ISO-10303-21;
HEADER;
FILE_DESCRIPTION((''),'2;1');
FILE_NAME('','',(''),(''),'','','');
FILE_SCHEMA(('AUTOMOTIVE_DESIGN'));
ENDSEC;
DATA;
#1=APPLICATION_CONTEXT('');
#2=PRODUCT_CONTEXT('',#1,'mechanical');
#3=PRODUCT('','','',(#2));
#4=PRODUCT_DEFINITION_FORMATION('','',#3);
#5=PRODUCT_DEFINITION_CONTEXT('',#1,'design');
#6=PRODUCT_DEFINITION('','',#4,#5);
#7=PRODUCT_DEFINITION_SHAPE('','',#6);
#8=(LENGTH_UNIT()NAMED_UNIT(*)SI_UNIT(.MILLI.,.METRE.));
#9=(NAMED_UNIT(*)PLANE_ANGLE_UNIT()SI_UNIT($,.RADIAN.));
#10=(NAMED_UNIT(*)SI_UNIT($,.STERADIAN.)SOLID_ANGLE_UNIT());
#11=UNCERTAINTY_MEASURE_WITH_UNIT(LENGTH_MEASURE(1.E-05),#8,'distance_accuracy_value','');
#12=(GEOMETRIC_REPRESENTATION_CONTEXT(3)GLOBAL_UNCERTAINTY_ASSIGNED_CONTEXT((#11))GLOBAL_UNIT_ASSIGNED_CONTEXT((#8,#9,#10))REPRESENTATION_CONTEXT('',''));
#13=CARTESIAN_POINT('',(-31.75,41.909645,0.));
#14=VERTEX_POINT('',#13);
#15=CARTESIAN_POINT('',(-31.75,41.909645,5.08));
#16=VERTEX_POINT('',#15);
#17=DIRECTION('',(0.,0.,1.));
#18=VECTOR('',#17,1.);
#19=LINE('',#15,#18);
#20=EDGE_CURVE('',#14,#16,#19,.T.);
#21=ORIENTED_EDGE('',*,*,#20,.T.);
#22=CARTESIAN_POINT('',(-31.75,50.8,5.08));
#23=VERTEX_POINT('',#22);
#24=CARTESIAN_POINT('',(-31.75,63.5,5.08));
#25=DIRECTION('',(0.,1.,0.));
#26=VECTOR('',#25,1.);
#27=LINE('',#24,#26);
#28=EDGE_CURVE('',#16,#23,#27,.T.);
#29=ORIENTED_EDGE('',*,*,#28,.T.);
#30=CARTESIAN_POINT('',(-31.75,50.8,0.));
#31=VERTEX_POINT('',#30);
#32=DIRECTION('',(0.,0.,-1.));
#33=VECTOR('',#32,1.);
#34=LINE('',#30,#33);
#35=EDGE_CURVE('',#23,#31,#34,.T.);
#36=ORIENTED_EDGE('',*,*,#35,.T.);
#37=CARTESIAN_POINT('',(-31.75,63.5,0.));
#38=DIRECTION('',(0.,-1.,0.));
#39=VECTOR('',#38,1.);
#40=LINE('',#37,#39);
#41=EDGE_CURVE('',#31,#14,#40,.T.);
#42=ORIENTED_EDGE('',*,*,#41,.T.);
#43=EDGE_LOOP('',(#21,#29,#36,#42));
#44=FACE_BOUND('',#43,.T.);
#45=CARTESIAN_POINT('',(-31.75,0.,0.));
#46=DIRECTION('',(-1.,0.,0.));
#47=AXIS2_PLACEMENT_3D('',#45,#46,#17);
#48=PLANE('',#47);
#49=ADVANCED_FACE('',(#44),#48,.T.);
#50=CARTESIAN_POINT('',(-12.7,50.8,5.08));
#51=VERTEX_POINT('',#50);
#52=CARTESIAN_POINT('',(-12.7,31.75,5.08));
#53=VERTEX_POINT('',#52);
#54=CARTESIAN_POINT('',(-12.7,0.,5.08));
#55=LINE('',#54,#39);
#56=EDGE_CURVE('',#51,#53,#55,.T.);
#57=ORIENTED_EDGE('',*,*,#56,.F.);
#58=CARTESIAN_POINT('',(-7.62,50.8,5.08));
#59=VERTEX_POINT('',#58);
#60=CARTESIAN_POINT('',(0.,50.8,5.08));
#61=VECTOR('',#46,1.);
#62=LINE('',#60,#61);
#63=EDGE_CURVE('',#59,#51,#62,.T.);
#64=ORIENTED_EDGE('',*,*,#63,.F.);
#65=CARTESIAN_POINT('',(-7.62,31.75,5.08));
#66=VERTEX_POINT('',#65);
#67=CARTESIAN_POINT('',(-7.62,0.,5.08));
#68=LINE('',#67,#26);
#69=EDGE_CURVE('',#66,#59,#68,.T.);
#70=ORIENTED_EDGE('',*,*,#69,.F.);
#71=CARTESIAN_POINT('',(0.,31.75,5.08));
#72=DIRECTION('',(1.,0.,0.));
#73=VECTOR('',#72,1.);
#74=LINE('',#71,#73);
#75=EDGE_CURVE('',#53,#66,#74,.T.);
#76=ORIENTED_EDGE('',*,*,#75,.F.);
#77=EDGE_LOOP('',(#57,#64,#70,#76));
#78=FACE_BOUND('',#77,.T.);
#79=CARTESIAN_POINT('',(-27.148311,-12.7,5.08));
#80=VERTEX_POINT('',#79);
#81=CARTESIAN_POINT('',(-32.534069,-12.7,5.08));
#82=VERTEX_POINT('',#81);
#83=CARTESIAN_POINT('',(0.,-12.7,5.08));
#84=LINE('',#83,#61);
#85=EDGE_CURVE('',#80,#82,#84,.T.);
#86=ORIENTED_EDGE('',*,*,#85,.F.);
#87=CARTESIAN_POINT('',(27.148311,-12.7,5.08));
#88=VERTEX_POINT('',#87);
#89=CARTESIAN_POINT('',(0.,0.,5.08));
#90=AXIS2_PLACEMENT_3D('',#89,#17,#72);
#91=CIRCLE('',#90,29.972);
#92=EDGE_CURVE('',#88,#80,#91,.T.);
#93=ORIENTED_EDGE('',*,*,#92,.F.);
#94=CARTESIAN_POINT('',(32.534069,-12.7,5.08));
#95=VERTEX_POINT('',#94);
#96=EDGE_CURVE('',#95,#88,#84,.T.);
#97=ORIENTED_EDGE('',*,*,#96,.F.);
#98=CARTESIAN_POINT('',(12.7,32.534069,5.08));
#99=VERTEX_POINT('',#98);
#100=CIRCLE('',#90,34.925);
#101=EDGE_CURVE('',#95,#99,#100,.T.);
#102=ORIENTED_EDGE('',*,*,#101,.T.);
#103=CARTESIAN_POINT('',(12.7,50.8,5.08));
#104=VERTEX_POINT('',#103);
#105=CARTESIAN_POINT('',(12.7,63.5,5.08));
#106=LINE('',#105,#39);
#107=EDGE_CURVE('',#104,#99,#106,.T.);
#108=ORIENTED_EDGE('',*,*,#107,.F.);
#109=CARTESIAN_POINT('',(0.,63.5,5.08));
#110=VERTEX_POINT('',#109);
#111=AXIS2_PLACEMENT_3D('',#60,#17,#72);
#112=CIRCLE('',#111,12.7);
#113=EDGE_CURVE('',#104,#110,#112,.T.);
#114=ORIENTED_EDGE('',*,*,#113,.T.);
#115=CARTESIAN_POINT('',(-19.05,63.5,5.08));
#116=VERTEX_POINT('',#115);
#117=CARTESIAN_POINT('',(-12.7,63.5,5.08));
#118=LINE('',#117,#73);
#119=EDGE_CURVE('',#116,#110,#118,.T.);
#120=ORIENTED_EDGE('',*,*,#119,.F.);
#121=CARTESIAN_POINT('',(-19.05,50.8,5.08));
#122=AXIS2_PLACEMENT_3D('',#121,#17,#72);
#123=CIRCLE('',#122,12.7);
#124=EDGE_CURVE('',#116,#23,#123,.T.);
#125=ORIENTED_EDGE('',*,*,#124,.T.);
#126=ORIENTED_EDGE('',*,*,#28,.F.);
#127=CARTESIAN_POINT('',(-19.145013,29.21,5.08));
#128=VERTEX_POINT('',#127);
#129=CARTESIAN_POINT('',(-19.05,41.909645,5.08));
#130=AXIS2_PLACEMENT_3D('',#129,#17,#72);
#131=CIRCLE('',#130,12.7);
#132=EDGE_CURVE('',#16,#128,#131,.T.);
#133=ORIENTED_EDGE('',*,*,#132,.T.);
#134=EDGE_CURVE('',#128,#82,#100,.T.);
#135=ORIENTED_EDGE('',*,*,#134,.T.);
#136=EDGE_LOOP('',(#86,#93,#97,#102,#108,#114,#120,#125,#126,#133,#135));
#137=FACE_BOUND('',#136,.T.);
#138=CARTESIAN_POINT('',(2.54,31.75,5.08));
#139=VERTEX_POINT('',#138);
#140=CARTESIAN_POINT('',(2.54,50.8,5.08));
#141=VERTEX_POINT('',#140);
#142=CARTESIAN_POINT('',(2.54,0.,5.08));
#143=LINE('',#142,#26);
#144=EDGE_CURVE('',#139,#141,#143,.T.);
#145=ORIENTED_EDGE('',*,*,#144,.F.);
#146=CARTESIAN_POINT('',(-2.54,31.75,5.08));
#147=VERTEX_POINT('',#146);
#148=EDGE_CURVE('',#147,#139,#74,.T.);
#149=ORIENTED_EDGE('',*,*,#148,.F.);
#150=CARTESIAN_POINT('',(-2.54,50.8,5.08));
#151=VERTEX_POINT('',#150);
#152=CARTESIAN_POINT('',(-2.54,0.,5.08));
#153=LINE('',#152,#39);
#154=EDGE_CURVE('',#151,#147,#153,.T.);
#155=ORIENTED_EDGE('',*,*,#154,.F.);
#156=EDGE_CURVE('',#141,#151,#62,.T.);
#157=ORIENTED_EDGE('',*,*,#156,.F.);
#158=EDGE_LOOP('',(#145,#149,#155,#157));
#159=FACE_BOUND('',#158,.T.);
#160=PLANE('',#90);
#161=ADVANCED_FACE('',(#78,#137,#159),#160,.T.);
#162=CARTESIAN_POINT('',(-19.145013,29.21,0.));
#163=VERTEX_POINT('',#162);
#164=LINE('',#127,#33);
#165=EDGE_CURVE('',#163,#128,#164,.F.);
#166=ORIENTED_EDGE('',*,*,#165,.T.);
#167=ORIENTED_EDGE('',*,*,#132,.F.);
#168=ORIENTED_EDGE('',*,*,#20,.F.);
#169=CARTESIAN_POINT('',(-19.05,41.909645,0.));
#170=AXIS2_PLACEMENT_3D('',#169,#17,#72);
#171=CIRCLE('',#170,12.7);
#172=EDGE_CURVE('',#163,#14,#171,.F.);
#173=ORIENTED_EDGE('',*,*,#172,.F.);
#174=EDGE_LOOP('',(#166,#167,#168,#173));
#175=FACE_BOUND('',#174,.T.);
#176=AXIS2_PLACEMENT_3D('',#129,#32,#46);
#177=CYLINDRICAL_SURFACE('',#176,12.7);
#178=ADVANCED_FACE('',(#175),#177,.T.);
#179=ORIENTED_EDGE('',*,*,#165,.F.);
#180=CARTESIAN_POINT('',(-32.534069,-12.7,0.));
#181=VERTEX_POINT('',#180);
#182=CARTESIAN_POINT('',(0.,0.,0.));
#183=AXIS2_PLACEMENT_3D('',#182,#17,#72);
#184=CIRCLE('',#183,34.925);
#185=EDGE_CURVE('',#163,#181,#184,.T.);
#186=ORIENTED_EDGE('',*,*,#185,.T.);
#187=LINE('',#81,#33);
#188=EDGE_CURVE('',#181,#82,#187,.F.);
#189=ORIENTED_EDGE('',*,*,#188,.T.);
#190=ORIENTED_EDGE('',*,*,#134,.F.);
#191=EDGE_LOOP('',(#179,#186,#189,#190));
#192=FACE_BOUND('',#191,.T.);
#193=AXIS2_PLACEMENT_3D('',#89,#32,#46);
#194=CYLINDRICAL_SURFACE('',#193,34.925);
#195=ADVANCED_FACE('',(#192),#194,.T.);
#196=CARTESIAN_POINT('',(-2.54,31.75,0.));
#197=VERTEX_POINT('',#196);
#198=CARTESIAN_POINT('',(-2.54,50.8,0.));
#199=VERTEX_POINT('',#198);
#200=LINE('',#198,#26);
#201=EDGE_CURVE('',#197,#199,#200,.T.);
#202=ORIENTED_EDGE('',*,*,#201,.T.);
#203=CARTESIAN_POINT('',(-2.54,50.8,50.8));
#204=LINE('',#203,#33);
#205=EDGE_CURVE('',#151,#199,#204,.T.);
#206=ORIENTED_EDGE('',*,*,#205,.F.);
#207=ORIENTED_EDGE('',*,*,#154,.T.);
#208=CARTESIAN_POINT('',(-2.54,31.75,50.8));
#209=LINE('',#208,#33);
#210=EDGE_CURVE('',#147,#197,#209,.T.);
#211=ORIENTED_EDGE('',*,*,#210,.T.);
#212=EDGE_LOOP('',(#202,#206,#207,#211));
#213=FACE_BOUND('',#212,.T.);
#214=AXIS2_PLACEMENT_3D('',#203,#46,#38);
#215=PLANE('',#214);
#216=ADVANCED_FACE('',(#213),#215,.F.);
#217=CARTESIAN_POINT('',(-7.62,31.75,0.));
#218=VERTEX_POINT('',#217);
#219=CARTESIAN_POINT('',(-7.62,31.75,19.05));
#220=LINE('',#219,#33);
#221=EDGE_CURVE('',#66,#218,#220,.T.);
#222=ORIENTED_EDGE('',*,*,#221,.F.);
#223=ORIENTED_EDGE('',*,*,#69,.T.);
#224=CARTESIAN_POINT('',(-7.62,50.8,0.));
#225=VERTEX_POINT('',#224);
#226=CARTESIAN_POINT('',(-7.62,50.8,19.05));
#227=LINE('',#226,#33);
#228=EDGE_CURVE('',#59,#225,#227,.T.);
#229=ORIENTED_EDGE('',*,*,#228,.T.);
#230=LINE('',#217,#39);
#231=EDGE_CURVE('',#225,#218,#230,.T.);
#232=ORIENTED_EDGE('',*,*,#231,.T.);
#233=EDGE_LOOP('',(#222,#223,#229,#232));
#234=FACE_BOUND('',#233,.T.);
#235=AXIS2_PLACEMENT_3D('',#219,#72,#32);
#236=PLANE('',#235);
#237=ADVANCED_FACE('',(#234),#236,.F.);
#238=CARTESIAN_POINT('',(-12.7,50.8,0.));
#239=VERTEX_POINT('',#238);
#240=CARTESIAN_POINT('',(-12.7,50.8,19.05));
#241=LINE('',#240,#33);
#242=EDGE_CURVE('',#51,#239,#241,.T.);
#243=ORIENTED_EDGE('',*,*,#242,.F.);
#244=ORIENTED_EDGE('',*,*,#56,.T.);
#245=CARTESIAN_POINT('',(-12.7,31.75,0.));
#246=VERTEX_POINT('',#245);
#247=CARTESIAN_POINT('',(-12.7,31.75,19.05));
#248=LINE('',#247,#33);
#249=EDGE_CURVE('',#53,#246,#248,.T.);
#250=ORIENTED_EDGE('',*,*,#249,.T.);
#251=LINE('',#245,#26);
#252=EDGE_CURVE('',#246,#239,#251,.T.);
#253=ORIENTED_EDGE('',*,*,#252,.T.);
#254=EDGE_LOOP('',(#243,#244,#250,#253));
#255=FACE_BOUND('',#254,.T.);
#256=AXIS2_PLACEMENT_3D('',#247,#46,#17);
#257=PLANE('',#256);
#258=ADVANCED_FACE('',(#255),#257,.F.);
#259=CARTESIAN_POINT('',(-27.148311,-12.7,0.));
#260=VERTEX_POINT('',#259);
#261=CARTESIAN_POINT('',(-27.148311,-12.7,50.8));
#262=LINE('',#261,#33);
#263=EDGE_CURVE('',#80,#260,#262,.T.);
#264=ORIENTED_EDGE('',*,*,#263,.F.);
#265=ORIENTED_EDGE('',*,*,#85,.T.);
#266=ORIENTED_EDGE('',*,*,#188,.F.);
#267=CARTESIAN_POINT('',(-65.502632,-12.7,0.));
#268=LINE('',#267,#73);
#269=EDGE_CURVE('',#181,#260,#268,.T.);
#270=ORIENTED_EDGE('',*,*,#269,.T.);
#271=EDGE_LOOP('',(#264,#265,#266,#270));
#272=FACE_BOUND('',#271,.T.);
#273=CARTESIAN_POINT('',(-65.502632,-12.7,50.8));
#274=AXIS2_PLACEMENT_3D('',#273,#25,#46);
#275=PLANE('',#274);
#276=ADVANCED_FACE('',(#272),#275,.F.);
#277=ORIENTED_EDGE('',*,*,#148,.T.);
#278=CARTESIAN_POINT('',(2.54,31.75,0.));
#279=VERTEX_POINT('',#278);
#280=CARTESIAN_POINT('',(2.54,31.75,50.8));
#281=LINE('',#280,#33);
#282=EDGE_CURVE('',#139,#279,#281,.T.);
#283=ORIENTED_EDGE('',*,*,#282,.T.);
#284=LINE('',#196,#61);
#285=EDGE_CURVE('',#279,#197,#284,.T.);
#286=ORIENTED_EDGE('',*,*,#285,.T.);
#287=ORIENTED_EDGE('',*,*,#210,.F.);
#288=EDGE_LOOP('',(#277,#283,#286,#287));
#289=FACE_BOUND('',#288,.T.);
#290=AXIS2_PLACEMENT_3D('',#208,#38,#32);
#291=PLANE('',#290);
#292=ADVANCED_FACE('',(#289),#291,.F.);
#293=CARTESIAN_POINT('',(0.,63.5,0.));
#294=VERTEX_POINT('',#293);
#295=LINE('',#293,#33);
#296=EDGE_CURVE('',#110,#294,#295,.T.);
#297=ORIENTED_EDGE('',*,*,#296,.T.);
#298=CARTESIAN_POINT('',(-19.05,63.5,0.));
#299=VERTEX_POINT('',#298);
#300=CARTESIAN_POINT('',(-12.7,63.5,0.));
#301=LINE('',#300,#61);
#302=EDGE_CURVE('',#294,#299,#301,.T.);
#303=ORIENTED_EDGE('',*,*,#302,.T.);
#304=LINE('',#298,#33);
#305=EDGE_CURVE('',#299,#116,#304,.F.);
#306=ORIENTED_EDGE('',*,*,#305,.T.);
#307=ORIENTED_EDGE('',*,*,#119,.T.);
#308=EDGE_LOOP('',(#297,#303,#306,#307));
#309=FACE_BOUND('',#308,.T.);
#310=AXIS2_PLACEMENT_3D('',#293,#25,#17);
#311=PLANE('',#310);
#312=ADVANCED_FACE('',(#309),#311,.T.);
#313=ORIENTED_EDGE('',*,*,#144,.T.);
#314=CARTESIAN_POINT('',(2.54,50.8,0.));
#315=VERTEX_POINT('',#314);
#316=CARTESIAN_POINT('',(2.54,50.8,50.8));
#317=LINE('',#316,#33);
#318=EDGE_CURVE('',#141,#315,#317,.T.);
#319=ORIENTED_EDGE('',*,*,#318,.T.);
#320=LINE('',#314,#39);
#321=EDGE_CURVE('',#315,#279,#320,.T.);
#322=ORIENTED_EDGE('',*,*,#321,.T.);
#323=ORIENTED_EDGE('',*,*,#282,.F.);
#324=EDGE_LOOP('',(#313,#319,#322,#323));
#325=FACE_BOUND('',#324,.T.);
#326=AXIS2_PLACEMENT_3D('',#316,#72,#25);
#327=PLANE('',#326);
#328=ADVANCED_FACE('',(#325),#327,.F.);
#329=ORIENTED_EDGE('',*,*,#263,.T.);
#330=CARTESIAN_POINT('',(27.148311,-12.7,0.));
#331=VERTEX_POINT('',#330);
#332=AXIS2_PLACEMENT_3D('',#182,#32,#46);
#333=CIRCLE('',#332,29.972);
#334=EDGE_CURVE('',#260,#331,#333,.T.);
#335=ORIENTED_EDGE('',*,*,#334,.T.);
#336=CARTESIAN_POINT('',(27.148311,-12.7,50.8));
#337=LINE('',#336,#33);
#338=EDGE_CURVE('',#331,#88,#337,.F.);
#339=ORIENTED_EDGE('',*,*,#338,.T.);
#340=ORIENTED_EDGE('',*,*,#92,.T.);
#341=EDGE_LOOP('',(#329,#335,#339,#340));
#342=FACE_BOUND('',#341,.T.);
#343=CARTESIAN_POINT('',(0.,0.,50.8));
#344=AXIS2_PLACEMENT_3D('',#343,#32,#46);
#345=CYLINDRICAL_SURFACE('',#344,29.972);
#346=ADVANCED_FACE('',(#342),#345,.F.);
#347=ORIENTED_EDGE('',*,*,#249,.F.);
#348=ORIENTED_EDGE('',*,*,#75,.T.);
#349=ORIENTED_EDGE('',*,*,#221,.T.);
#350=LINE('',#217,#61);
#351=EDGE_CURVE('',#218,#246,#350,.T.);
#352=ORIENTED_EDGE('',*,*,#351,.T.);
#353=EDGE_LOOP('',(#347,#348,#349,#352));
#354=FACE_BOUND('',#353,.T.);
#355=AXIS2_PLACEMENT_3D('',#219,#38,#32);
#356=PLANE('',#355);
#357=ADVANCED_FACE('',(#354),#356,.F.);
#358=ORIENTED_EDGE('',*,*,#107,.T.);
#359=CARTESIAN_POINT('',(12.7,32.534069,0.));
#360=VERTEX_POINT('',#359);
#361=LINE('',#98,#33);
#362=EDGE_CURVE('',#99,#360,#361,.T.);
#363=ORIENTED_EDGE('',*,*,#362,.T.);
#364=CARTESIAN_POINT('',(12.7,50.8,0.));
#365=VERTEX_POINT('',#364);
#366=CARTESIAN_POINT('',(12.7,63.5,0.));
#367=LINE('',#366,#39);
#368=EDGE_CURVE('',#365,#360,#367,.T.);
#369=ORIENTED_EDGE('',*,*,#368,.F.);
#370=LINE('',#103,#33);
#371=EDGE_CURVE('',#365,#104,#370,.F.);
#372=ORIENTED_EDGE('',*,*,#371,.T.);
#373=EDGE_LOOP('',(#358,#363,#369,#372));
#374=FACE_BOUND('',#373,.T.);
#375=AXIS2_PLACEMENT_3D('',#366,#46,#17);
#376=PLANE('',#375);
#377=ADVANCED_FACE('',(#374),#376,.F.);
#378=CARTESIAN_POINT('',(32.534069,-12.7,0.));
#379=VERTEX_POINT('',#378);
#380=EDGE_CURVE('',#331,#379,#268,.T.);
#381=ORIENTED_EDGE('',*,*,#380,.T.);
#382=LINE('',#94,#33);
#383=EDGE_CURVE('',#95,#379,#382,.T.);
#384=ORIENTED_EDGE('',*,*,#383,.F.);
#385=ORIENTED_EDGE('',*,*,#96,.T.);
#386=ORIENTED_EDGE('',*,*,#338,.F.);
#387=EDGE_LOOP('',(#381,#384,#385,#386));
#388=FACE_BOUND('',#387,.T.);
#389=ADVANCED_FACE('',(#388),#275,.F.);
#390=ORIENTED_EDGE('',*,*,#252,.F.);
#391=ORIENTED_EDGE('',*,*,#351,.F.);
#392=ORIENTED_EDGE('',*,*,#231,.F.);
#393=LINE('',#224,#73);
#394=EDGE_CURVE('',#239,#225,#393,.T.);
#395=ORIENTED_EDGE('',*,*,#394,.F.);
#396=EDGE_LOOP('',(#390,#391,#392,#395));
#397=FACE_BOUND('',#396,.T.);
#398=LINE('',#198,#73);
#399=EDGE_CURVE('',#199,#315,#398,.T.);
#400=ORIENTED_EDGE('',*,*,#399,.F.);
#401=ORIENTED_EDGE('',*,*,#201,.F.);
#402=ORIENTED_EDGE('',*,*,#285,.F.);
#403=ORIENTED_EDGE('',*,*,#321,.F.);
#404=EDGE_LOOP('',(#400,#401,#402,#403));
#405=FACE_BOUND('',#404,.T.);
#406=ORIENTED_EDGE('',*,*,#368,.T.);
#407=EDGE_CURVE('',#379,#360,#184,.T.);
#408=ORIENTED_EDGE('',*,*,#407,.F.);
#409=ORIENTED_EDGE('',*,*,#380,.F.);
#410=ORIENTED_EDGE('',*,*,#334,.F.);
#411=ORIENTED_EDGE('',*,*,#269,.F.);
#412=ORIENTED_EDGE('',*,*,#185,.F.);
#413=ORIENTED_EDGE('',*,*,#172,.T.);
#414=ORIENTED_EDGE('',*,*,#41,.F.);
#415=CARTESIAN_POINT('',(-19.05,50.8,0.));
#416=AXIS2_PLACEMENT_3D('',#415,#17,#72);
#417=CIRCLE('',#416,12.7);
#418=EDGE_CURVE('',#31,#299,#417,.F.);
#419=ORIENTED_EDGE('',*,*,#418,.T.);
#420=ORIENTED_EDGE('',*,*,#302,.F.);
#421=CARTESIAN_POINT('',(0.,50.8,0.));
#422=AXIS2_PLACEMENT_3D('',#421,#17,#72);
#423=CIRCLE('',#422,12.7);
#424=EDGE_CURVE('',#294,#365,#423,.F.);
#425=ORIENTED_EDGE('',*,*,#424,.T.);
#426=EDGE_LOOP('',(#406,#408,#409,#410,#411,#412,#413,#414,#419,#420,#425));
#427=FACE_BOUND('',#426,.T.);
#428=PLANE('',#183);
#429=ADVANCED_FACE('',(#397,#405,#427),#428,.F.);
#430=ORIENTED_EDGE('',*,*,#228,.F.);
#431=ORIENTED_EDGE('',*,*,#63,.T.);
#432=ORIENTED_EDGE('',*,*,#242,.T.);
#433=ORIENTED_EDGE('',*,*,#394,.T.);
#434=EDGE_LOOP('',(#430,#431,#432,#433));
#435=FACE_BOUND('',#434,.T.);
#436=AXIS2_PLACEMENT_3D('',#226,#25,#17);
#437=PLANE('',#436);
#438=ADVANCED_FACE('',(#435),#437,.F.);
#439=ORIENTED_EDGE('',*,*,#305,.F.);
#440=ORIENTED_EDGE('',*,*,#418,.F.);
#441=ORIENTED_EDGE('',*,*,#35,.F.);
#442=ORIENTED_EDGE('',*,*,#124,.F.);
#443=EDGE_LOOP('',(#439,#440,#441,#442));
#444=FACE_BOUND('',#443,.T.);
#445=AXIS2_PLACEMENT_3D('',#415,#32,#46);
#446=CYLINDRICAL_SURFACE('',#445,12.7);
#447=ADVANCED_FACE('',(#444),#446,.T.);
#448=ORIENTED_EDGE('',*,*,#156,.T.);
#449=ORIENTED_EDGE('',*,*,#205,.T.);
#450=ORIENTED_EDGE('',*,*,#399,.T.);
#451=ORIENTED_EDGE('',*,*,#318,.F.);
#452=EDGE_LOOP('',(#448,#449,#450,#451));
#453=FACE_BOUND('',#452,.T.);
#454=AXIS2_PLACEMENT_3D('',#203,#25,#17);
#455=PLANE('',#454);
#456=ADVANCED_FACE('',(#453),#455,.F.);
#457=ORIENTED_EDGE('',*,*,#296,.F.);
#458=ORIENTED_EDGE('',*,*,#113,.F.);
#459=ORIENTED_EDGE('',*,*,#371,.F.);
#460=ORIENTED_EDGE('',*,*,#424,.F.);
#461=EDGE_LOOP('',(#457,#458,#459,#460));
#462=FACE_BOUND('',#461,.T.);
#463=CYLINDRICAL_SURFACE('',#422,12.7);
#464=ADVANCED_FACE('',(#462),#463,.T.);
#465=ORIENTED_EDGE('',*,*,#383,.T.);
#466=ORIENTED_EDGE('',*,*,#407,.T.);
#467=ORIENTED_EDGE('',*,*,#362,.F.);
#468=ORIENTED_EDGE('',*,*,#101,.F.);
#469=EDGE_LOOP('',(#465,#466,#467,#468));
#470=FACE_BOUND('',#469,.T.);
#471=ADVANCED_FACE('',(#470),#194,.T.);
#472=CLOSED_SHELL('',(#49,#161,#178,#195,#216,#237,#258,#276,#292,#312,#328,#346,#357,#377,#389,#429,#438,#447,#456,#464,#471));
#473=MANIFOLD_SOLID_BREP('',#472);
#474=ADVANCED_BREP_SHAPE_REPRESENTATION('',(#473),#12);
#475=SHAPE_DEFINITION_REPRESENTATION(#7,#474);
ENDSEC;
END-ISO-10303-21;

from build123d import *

# Parameters (mm, degrees)
SKETCH1_R           = 34.925
BOSS_EXTRUDE1_DEPTH = 5.08
SKETCH2_W           = 25.4
SKETCH2_H           = 5.08
BOSS_EXTRUDE2_DEPTH = 63.5
SKETCH3_R           = 29.972
CUT_EXTRUDE1_DEPTH  = 50.8
SKETCH4_W           = 5.08
SKETCH4_H           = 19.05
CUT_EXTRUDE2_DEPTH  = 50.8
SKETCH5_W           = 129.040366972
SKETCH5_H           = 73.118289239
CUT_EXTRUDE3_DEPTH  = 50.8
SKETCH6_W           = 5.08
SKETCH6_H           = 34.29
BOSS_EXTRUDE3_DEPTH = 19.05
SKETCH7_W           = 5.08
SKETCH7_H           = 19.05
CUT_EXTRUDE4_DEPTH  = 19.05
FILLET1_R           = 12.7


with BuildPart() as part:
    # Sketch1 → Boss-Extrude1 (new body)
    with BuildSketch(Plane.XY):
        Circle(SKETCH1_R)
    extrude(amount=BOSS_EXTRUDE1_DEPTH)

    # Sketch2 → Boss-Extrude2 (add)
    with BuildSketch(Plane(origin=(0, 0, 0), x_dir=(1, 0, 0), z_dir=(0, 1, 0))):
        with Locations((0, -2.54)):
            Rectangle(SKETCH2_W, SKETCH2_H)
    extrude(amount=BOSS_EXTRUDE2_DEPTH)

    # Sketch3 → Cut-Extrude1 (cut)
    with BuildSketch(Plane(origin=(0, 0, 0), x_dir=(-1, 0, 0), z_dir=(0, 0, -1))):
        Circle(SKETCH3_R)
    extrude(amount=-CUT_EXTRUDE1_DEPTH, mode=Mode.SUBTRACT)

    # Sketch4 → Cut-Extrude2 (cut)
    with BuildSketch(Plane(origin=(0, 0, 0), x_dir=(-1, 0, 0), z_dir=(0, 0, -1))):
        with Locations((0, 41.275)):
            Rectangle(SKETCH4_W, SKETCH4_H)
    extrude(amount=-CUT_EXTRUDE2_DEPTH, mode=Mode.SUBTRACT)

    # Sketch5 → Cut-Extrude3 (cut)
    with BuildSketch(Plane(origin=(0, 0, 0), x_dir=(-1, 0, 0), z_dir=(0, 0, -1))):
        with Locations((0.982448892, -49.25914462)):
            Rectangle(SKETCH5_W, SKETCH5_H)
    extrude(amount=-CUT_EXTRUDE3_DEPTH, mode=Mode.SUBTRACT)

    # Sketch6 → Boss-Extrude3 (add)
    with BuildSketch(Plane.ZY.offset(12.7)):
        with Locations((2.54, 46.355)):
            Rectangle(SKETCH6_W, SKETCH6_H)
    extrude(amount=BOSS_EXTRUDE3_DEPTH)

    # Sketch7 → Cut-Extrude4 (cut)
    with BuildSketch(Plane(origin=(0, 0, 0), x_dir=(-1, 0, 0), z_dir=(0, 0, -1))):
        with Locations((10.16, 41.275)):
            Rectangle(SKETCH7_W, SKETCH7_H)
    extrude(amount=-CUT_EXTRUDE4_DEPTH, mode=Mode.SUBTRACT)

    # Fillet1
    # the kernel refuses this fillet: 12.7 mm, written as the material it takes off along each edge
    with BuildSketch(Plane(origin=(12.7, 63.5, -31.75), x_dir=(-1, 0, 0), z_dir=(0, 0, 1))) as fillet1_piece_1:
        with BuildLine():
            CenterArc((FILLET1_R, FILLET1_R), FILLET1_R, 180, 90)
            Line((0, FILLET1_R), (0, 0))
            Line((0, 0), (FILLET1_R, 0))
        make_face()
    extrude(amount=68.58, mode=Mode.SUBTRACT)
    with BuildSketch(Plane(origin=(-31.75, 63.5, -31.75), x_dir=(1, 0, 0), z_dir=(0, 0, 1))) as fillet1_piece_2:
        with BuildLine():
            CenterArc((FILLET1_R, -FILLET1_R), FILLET1_R, 90, 90)
            Line((0, -FILLET1_R), (0, 0))
            Line((0, 0), (FILLET1_R, 0))
        make_face()
    extrude(amount=68.58, mode=Mode.SUBTRACT)
    with BuildSketch(Plane(origin=(-31.75, 29.21, 36.83), x_dir=(0, 1, 0), z_dir=(0, 0, -1))) as fillet1_piece_3_section:
        with BuildLine():
            CenterArc((FILLET1_R, FILLET1_R), FILLET1_R, 180, 90)
            Line((0, FILLET1_R), (0, 0))
            Line((0, 0), (FILLET1_R, 0))
        make_face()
    fillet1_piece_3 = extrude(amount=68.58, mode=Mode.PRIVATE)
    fillet1_piece_3 = fillet1_piece_3 - Plane(origin=(0, 0, 2.54), x_dir=(1, 0, 0), z_dir=(0, 0, -1)) * Cylinder(34.925, 188, mode=Mode.PRIVATE)
    add(fillet1_piece_3, mode=Mode.SUBTRACT)


solid = part.part
